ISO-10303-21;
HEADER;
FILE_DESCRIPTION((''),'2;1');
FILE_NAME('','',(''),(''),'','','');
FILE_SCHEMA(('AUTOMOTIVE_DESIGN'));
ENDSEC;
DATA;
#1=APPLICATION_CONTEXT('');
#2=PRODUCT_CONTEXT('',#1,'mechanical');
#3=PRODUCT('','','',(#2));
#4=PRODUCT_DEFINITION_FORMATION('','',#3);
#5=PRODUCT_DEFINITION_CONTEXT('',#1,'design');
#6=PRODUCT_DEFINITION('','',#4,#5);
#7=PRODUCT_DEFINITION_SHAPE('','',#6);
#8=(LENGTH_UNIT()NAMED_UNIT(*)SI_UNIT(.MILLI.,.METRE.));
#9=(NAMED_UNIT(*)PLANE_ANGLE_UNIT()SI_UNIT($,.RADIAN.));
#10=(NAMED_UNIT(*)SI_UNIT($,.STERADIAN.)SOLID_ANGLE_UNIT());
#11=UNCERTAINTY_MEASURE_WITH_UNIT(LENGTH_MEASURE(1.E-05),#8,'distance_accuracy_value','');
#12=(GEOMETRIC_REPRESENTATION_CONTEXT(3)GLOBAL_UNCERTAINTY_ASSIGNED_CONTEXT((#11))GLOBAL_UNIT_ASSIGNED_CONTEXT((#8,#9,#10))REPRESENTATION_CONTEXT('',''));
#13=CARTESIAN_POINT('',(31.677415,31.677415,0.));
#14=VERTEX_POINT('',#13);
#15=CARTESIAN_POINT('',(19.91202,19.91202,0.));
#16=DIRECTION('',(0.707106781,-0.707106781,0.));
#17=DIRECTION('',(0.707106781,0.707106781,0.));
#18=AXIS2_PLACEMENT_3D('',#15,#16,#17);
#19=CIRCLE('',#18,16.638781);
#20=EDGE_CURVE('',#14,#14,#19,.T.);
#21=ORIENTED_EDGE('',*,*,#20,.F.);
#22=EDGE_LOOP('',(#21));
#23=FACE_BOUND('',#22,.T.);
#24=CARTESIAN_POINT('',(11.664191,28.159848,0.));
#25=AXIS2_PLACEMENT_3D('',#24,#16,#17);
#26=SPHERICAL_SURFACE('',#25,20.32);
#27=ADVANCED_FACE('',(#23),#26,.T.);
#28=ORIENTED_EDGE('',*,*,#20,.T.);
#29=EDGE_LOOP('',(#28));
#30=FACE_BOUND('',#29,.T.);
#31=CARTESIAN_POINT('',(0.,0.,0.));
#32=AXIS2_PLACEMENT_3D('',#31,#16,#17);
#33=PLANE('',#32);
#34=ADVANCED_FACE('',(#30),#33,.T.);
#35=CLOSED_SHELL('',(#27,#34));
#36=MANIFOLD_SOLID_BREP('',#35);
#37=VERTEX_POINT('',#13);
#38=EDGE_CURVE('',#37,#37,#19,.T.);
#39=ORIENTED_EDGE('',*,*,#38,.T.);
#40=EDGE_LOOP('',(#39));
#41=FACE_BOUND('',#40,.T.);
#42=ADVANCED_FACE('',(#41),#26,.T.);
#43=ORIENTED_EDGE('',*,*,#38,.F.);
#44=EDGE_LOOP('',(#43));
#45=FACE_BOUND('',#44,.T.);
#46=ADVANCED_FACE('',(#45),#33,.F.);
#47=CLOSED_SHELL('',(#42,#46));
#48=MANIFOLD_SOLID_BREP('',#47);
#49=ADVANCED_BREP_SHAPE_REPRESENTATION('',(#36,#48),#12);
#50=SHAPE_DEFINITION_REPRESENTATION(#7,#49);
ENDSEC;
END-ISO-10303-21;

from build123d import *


with BuildPart() as part:
    # Sketch1 → Revolve1 (revolve)
    with BuildSketch(Plane.XY):
        with BuildLine():
            Line((3.888063673, 9.38661605), (19.440318364, 46.933080252))
            ThreePointArc((19.440318364, 46.933080252), (-7.109041082, 35.935975497), (3.888063673, 9.38661605))
        make_face()
    revolve(axis=Axis((3.888063673, 9.38661605, 0), (0.3826834323650907, 0.9238795325112864, 0)))


with BuildPart() as body_2:
    # Intersect2: read off the stored shape, not the designer's step
    # Intersect2: the piece on the far side of the plane
    add(part.part)
    split(bisect_by=Plane(origin=(0, 0, 0), x_dir=(0.707106781186549, 0.707106781186546, 0), z_dir=(0.707106781186546, -0.707106781186549, 0)), keep=Keep.BOTTOM)


with BuildPart() as part_1:
    add(part.part)

    # Intersect2
    split(bisect_by=Plane(origin=(0, 0, 0), x_dir=(0.707106781186549, 0.707106781186546, 0), z_dir=(0.707106781186546, -0.707106781186549, 0)), keep=Keep.TOP)


solid = Compound([body_2.part, part_1.part])
